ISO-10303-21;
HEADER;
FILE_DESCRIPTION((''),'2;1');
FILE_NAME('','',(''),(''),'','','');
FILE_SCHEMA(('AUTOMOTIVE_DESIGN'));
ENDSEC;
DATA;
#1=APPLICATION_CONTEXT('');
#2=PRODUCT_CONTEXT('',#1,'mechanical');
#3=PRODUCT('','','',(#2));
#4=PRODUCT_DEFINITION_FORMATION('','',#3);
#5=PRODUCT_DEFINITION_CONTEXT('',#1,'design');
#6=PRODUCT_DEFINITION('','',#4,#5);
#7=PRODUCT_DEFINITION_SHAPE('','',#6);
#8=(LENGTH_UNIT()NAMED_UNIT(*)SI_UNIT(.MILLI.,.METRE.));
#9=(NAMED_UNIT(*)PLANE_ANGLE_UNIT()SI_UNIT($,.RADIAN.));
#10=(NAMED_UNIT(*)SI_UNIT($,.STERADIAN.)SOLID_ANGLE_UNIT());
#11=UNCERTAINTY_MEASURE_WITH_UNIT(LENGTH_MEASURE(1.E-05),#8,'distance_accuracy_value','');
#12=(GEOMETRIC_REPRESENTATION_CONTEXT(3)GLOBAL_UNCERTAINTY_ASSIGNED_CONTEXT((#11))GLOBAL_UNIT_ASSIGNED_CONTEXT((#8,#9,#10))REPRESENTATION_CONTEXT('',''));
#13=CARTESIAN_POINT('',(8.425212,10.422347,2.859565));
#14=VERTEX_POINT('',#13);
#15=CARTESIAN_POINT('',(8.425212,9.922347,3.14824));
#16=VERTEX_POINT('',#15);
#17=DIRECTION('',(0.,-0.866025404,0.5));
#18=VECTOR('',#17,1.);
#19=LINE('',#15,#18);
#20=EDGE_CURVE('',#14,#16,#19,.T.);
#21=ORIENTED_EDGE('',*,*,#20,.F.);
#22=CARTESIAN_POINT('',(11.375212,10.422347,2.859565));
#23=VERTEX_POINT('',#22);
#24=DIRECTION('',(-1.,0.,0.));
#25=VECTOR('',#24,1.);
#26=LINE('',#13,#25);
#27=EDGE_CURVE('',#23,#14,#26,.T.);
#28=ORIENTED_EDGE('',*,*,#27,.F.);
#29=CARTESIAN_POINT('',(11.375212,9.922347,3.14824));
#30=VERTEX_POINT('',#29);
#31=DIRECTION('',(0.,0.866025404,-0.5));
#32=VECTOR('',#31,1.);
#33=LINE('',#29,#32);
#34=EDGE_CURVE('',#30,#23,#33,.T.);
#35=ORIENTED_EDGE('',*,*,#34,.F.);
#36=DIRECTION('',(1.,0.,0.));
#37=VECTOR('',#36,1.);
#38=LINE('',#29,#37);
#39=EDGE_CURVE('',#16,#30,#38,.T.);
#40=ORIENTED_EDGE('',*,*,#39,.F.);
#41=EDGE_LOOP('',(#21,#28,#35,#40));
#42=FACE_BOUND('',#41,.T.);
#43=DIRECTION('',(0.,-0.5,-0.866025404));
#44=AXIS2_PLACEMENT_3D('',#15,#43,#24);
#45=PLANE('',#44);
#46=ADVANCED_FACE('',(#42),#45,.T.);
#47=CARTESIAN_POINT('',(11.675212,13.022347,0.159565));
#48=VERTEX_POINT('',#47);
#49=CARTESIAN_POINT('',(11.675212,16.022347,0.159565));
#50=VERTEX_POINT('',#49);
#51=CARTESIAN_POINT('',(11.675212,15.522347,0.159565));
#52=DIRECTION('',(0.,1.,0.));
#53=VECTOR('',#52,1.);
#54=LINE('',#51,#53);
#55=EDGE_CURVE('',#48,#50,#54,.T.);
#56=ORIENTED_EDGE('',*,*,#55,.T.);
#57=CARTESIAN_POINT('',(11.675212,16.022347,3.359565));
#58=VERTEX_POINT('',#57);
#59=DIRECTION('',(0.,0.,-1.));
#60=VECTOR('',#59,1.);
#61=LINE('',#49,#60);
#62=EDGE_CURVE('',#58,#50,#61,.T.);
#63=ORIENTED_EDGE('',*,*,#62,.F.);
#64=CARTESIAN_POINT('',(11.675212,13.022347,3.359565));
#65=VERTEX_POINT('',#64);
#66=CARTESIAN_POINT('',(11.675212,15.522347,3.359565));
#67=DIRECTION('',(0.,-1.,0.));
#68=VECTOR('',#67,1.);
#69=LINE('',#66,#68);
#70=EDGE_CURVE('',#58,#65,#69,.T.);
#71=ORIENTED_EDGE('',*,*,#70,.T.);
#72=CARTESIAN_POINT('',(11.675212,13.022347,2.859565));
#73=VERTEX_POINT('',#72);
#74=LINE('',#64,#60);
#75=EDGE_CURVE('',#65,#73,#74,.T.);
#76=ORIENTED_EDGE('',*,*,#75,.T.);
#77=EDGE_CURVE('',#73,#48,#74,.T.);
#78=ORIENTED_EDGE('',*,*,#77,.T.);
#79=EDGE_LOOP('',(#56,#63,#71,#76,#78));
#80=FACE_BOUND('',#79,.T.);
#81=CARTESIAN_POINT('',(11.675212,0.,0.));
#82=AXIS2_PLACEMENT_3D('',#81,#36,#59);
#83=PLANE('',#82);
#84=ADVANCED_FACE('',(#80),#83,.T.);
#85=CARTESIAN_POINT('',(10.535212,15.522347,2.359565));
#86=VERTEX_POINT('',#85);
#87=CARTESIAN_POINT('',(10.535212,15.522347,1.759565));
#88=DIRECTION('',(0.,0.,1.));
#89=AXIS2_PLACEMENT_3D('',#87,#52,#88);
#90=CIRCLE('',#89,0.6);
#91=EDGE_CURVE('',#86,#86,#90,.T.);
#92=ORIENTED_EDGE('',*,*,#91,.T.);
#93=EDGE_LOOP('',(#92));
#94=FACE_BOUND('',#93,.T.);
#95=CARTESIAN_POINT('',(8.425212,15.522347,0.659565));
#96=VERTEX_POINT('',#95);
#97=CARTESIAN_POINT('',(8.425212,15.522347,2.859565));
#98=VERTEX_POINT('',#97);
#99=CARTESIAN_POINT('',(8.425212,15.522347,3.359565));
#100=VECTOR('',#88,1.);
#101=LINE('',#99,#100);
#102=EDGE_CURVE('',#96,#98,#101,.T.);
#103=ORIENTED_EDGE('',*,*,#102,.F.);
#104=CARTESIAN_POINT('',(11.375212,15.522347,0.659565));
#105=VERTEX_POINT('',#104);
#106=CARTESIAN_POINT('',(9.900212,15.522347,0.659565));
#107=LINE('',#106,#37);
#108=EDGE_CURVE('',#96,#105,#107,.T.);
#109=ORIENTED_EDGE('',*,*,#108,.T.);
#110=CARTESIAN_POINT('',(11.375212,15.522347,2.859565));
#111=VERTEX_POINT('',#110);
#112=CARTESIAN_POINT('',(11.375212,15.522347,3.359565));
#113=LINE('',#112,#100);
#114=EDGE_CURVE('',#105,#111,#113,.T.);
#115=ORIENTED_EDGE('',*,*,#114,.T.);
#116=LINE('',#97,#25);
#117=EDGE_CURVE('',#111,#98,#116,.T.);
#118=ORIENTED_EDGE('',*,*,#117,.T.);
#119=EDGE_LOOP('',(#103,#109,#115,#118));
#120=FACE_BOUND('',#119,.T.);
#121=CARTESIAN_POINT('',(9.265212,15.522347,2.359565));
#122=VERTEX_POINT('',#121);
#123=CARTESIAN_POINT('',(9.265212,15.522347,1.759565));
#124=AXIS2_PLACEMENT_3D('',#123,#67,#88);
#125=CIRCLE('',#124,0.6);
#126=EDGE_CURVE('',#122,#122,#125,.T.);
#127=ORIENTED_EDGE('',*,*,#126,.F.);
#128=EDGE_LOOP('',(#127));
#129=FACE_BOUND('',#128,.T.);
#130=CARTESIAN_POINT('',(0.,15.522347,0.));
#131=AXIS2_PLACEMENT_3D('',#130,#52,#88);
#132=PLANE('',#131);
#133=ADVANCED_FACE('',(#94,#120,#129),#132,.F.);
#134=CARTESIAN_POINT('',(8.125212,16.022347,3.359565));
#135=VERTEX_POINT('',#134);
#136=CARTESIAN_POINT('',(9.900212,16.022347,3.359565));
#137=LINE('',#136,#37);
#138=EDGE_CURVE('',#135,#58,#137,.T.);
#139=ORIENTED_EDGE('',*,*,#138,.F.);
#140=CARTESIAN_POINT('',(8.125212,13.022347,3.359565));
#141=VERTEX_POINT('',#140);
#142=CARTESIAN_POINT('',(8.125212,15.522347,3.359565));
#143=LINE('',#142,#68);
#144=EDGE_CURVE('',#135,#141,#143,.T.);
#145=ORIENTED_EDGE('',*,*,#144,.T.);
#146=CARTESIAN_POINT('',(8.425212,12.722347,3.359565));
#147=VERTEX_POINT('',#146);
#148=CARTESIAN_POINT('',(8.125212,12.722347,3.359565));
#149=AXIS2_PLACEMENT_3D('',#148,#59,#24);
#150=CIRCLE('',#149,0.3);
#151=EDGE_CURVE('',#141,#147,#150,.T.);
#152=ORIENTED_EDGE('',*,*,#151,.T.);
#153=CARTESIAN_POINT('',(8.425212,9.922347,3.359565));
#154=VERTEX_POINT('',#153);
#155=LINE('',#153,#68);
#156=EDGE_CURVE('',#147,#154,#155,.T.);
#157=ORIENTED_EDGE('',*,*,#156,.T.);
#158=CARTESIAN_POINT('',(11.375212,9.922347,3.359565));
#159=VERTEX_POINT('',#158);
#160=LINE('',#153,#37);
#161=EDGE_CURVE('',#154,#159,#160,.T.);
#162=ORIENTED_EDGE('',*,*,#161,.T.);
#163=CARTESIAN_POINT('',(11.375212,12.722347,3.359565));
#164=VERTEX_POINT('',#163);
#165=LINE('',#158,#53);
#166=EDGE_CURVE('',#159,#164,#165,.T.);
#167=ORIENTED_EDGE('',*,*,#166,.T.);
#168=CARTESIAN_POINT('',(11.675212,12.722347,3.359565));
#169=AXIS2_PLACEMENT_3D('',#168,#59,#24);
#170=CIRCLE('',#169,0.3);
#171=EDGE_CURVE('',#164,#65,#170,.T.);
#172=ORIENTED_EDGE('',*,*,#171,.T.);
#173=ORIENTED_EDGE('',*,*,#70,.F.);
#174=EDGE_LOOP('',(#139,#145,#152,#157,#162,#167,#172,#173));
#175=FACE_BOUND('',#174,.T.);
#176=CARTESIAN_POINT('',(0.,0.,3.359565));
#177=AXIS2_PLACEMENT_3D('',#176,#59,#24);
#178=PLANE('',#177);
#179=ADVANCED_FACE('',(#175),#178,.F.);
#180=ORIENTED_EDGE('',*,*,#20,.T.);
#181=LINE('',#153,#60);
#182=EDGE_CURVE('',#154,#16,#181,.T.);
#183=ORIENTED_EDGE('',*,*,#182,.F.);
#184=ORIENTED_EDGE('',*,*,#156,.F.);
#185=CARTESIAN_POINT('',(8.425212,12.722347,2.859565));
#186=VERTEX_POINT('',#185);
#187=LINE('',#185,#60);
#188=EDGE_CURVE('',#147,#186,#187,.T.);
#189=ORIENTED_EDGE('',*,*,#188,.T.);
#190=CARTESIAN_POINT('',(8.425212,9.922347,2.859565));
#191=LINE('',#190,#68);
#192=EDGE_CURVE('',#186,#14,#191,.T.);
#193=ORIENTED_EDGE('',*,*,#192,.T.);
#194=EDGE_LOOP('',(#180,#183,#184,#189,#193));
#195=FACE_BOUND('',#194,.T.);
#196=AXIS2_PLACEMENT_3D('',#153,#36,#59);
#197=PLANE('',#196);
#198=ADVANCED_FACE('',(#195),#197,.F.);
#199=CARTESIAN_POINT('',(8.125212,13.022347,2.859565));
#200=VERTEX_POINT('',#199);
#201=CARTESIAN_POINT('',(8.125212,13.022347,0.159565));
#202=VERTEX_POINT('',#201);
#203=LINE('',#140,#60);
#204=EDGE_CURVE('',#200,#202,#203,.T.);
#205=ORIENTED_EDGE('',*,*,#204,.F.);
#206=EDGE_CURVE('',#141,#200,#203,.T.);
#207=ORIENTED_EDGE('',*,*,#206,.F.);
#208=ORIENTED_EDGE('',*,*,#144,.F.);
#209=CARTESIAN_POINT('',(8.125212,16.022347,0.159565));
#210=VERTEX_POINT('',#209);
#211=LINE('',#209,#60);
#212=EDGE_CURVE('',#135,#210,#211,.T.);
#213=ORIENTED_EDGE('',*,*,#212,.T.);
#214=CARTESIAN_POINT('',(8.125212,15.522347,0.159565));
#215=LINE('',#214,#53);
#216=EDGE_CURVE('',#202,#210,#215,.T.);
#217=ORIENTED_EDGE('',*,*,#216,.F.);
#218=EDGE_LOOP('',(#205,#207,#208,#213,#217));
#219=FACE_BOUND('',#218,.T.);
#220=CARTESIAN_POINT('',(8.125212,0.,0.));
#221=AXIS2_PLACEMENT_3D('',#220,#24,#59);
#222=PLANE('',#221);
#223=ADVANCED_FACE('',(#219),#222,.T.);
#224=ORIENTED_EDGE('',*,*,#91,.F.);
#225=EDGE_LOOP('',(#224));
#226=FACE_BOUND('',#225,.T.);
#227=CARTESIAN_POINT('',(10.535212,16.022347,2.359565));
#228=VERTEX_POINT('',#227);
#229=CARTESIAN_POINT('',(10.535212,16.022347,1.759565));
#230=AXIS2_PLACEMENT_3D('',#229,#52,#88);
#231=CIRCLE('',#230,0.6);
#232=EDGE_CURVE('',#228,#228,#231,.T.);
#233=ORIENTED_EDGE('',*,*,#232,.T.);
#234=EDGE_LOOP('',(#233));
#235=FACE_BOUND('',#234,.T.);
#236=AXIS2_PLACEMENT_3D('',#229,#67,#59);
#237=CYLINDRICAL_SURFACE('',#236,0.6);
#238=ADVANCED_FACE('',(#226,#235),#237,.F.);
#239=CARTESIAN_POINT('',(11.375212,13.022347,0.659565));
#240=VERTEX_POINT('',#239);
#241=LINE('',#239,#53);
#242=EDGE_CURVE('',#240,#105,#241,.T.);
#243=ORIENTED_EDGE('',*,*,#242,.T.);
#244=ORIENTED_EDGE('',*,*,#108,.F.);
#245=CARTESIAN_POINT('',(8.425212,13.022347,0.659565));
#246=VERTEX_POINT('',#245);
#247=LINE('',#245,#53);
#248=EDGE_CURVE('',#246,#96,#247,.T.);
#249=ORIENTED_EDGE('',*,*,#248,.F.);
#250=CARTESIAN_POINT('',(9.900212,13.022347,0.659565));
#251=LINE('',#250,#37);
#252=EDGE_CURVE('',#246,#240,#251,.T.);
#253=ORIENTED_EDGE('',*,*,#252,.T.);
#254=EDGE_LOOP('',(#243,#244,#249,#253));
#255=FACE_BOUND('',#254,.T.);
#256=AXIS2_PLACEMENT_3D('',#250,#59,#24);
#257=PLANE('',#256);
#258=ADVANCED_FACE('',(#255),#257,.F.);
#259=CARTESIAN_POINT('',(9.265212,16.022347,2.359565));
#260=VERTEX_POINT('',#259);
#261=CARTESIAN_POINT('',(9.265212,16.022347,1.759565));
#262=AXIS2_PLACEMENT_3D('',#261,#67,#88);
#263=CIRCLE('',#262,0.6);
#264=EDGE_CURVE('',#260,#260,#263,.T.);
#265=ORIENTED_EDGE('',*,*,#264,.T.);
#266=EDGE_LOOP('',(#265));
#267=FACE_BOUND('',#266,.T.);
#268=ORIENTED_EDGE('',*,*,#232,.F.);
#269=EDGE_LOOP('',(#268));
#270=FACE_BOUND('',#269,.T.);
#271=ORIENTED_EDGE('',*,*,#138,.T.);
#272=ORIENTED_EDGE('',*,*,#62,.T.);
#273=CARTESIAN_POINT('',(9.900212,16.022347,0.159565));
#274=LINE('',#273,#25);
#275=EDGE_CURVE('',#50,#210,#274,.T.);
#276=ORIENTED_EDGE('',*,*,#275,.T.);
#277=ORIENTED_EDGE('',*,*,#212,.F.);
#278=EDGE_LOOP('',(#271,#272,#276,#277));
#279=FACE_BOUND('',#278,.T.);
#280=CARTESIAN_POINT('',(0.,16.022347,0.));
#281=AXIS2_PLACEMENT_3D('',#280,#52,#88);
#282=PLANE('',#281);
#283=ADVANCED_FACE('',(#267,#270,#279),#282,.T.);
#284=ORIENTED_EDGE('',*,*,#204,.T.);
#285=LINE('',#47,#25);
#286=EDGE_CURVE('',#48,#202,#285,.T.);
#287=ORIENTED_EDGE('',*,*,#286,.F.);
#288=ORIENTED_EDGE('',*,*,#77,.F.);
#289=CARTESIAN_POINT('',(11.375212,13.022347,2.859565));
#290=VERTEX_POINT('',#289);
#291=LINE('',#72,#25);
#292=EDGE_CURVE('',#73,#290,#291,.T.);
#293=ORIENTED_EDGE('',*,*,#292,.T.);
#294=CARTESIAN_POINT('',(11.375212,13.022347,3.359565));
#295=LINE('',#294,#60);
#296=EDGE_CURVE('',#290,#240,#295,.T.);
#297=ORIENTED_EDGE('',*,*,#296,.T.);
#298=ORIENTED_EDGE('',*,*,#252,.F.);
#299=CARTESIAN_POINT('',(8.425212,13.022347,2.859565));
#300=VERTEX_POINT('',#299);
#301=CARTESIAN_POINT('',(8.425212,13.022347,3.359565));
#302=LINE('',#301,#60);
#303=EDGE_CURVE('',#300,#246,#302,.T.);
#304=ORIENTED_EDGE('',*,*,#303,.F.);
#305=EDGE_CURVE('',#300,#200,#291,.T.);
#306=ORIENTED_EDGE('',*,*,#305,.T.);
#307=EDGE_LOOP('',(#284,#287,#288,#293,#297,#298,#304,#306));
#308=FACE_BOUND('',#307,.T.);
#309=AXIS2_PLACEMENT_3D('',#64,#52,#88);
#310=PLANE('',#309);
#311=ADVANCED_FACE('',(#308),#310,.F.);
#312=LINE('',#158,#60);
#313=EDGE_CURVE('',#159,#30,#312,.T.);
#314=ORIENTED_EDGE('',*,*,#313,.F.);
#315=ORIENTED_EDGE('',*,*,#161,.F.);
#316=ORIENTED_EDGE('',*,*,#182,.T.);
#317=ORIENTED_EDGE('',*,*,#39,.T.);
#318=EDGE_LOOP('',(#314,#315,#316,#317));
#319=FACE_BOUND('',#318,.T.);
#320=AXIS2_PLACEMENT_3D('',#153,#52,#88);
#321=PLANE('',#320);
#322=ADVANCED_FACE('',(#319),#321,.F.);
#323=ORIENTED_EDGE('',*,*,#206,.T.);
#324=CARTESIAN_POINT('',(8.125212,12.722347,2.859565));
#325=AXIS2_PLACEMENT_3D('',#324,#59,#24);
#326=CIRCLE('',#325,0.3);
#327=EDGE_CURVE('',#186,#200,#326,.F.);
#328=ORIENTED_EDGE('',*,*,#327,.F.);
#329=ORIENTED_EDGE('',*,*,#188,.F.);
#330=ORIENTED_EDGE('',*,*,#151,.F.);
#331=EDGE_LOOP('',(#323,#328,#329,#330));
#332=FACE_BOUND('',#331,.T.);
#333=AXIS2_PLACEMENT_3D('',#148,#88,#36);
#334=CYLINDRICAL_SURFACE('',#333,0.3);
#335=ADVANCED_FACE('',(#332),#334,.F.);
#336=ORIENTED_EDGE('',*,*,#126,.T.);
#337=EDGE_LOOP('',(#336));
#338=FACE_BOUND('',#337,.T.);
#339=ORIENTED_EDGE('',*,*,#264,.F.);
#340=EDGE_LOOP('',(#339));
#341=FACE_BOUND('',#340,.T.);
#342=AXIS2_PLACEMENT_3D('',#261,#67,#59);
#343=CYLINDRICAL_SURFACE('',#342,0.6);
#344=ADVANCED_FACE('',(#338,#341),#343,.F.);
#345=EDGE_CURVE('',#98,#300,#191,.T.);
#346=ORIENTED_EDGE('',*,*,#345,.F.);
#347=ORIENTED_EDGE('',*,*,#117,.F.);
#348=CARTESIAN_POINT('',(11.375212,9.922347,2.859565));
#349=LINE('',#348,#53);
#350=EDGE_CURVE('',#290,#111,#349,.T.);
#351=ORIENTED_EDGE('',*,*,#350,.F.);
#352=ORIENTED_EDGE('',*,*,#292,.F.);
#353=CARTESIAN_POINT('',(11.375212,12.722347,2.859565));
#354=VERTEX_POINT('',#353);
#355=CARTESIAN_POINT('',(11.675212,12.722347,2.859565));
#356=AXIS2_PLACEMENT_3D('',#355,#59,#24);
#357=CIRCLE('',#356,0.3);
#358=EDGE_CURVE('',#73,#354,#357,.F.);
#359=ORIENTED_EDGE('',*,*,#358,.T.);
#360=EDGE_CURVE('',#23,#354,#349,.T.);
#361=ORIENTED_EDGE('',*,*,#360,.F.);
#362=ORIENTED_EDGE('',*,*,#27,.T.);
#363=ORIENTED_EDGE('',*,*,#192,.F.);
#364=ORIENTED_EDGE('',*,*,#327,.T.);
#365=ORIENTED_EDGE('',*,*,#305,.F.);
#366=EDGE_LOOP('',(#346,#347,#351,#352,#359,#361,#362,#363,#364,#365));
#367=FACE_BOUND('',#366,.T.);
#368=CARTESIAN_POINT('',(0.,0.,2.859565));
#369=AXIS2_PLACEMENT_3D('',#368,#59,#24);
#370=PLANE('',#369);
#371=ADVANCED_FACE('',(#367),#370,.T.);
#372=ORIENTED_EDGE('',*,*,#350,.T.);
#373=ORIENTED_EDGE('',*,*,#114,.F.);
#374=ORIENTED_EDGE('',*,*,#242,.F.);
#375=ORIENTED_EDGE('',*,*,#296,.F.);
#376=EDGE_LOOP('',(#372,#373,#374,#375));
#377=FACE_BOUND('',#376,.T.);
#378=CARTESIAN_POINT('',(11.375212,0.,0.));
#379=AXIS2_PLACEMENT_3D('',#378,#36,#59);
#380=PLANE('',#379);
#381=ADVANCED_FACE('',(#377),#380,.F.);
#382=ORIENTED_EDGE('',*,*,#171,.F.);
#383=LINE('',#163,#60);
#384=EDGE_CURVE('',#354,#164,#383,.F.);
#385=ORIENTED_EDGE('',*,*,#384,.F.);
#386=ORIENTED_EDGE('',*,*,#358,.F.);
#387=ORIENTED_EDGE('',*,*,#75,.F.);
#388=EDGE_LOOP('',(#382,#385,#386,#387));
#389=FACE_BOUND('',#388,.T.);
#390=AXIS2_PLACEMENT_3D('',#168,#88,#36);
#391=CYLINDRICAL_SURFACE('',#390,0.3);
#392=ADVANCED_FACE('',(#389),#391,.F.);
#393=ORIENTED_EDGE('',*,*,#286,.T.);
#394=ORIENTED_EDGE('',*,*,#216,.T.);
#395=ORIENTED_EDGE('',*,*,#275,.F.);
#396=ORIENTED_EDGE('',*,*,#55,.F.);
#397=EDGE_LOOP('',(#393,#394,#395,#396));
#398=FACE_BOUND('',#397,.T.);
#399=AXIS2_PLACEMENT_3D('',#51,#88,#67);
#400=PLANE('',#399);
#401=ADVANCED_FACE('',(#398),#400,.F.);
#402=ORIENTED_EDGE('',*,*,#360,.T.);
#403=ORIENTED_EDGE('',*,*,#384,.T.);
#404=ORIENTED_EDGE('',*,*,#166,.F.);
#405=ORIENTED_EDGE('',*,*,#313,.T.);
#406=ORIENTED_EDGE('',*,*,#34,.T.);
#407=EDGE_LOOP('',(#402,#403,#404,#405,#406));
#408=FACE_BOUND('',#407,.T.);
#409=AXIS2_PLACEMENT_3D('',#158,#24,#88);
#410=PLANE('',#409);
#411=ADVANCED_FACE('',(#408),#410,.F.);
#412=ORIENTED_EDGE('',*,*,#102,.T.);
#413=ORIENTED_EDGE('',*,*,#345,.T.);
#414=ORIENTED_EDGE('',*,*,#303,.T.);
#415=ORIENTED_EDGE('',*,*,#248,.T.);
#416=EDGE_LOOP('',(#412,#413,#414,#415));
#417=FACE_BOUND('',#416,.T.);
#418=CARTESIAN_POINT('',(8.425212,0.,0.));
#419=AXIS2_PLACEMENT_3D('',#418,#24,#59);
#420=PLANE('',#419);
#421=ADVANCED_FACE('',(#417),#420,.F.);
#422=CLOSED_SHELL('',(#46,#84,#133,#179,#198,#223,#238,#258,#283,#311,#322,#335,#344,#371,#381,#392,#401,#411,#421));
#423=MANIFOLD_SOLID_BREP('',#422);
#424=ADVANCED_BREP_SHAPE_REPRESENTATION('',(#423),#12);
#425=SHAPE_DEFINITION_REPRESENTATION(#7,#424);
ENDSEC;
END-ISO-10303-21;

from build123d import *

# Parameters (mm, degrees)
SKETCH1_W           = 2.95
SKETCH1_H           = 5.6
BOSS_EXTRUDE1_DEPTH = 0.5
SKETCH2_W           = 3.2
SKETCH2_H           = 2.5
BOSS_EXTRUDE2_DEPTH = 0.3
SKETCH3_W           = 0.5
SKETCH3_H           = 2.5
BOSS_EXTRUDE3_DEPTH = 1.475
SKETCH4_W           = 1.775
SKETCH4_H           = 3.2
SKETCH4_R           = 0.6
BOSS_EXTRUDE4_DEPTH = 0.5
CHAMFER1_SIZE       = 0.5
CHAMFER1_SIZE2      = 0.288675135
FILLET1_R           = 0.3


with BuildPart() as part:
    # Sketch1 → Boss-Extrude1 (new body)
    with BuildSketch(Plane.XY.offset(2.859564597)):
        with Locations((9.900211803, 12.722346538)):
            Rectangle(SKETCH1_W, SKETCH1_H)
    extrude(amount=BOSS_EXTRUDE1_DEPTH)

    # Sketch2 → Boss-Extrude2 (add)
    with BuildSketch(Plane(origin=(11.375211803, 0, 0), x_dir=(0, 0, -1), z_dir=(1, 0, 0))):
        with Locations((-1.759564597, 14.272346538)):
            Rectangle(SKETCH2_W, SKETCH2_H)
    boss_extrude2 = extrude(amount=BOSS_EXTRUDE2_DEPTH)

    # Sketch3 → Boss-Extrude3 (add)
    with BuildSketch(Plane.ZY.offset(-11.375211803)):
        with Locations((0.409564597, 14.272346538)):
            Rectangle(SKETCH3_W, SKETCH3_H)
    boss_extrude3 = extrude(amount=BOSS_EXTRUDE3_DEPTH)

    # Sketch4 → Boss-Extrude4 (add)
    with BuildSketch(Plane(origin=(0, 15.522346538, 0), x_dir=(1, 0, 0), z_dir=(0, 1, 0))):
        with Locations((10.787711803, -1.759564597)):
            Rectangle(SKETCH4_W, SKETCH4_H)
        with Locations(Location((10.535211803, -1.759564597, 0), (0, 0, 270))):
            Circle(SKETCH4_R, mode=Mode.SUBTRACT)
    boss_extrude4 = extrude(amount=BOSS_EXTRUDE4_DEPTH)

    # Mirror1: Boss-Extrude2, Boss-Extrude3, Boss-Extrude4 across plane
    add(boss_extrude2.mirror(Plane(origin=(9.900211803, 0, 0), x_dir=(0, 0, 1), z_dir=(1, 0, 0))))
    add(boss_extrude3.mirror(Plane(origin=(9.900211803, 0, 0), x_dir=(0, 0, 1), z_dir=(1, 0, 0))))
    add(boss_extrude4.mirror(Plane(origin=(9.900211803, 0, 0), x_dir=(0, 0, 1), z_dir=(1, 0, 0))))

    # Chamfer1
    chamfer1_edges = [part.edges().sort_by_distance(p)[0] for p in [
        (9.900211803, 9.922346538, 2.859564597),
    ]]
    chamfer1_side = [part.faces().sort_by_distance(p)[0] for p in [
        (9.900211803, 12.722346538, 2.859564597),
    ]]
    chamfer(chamfer1_edges, length=CHAMFER1_SIZE, length2=CHAMFER1_SIZE2, reference=chamfer1_side[0])

    # Fillet1
    fillet1_edges = [part.edges().sort_by_distance(p)[0] for p in [
        (11.375211803, 13.022346538, 3.109564597),
        (8.425211803, 13.022346538, 3.109564597),
    ]]
    fillet(fillet1_edges, radius=FILLET1_R - 0.0001)  # a hair under: the kernel refuses the full size


solid = part.part
